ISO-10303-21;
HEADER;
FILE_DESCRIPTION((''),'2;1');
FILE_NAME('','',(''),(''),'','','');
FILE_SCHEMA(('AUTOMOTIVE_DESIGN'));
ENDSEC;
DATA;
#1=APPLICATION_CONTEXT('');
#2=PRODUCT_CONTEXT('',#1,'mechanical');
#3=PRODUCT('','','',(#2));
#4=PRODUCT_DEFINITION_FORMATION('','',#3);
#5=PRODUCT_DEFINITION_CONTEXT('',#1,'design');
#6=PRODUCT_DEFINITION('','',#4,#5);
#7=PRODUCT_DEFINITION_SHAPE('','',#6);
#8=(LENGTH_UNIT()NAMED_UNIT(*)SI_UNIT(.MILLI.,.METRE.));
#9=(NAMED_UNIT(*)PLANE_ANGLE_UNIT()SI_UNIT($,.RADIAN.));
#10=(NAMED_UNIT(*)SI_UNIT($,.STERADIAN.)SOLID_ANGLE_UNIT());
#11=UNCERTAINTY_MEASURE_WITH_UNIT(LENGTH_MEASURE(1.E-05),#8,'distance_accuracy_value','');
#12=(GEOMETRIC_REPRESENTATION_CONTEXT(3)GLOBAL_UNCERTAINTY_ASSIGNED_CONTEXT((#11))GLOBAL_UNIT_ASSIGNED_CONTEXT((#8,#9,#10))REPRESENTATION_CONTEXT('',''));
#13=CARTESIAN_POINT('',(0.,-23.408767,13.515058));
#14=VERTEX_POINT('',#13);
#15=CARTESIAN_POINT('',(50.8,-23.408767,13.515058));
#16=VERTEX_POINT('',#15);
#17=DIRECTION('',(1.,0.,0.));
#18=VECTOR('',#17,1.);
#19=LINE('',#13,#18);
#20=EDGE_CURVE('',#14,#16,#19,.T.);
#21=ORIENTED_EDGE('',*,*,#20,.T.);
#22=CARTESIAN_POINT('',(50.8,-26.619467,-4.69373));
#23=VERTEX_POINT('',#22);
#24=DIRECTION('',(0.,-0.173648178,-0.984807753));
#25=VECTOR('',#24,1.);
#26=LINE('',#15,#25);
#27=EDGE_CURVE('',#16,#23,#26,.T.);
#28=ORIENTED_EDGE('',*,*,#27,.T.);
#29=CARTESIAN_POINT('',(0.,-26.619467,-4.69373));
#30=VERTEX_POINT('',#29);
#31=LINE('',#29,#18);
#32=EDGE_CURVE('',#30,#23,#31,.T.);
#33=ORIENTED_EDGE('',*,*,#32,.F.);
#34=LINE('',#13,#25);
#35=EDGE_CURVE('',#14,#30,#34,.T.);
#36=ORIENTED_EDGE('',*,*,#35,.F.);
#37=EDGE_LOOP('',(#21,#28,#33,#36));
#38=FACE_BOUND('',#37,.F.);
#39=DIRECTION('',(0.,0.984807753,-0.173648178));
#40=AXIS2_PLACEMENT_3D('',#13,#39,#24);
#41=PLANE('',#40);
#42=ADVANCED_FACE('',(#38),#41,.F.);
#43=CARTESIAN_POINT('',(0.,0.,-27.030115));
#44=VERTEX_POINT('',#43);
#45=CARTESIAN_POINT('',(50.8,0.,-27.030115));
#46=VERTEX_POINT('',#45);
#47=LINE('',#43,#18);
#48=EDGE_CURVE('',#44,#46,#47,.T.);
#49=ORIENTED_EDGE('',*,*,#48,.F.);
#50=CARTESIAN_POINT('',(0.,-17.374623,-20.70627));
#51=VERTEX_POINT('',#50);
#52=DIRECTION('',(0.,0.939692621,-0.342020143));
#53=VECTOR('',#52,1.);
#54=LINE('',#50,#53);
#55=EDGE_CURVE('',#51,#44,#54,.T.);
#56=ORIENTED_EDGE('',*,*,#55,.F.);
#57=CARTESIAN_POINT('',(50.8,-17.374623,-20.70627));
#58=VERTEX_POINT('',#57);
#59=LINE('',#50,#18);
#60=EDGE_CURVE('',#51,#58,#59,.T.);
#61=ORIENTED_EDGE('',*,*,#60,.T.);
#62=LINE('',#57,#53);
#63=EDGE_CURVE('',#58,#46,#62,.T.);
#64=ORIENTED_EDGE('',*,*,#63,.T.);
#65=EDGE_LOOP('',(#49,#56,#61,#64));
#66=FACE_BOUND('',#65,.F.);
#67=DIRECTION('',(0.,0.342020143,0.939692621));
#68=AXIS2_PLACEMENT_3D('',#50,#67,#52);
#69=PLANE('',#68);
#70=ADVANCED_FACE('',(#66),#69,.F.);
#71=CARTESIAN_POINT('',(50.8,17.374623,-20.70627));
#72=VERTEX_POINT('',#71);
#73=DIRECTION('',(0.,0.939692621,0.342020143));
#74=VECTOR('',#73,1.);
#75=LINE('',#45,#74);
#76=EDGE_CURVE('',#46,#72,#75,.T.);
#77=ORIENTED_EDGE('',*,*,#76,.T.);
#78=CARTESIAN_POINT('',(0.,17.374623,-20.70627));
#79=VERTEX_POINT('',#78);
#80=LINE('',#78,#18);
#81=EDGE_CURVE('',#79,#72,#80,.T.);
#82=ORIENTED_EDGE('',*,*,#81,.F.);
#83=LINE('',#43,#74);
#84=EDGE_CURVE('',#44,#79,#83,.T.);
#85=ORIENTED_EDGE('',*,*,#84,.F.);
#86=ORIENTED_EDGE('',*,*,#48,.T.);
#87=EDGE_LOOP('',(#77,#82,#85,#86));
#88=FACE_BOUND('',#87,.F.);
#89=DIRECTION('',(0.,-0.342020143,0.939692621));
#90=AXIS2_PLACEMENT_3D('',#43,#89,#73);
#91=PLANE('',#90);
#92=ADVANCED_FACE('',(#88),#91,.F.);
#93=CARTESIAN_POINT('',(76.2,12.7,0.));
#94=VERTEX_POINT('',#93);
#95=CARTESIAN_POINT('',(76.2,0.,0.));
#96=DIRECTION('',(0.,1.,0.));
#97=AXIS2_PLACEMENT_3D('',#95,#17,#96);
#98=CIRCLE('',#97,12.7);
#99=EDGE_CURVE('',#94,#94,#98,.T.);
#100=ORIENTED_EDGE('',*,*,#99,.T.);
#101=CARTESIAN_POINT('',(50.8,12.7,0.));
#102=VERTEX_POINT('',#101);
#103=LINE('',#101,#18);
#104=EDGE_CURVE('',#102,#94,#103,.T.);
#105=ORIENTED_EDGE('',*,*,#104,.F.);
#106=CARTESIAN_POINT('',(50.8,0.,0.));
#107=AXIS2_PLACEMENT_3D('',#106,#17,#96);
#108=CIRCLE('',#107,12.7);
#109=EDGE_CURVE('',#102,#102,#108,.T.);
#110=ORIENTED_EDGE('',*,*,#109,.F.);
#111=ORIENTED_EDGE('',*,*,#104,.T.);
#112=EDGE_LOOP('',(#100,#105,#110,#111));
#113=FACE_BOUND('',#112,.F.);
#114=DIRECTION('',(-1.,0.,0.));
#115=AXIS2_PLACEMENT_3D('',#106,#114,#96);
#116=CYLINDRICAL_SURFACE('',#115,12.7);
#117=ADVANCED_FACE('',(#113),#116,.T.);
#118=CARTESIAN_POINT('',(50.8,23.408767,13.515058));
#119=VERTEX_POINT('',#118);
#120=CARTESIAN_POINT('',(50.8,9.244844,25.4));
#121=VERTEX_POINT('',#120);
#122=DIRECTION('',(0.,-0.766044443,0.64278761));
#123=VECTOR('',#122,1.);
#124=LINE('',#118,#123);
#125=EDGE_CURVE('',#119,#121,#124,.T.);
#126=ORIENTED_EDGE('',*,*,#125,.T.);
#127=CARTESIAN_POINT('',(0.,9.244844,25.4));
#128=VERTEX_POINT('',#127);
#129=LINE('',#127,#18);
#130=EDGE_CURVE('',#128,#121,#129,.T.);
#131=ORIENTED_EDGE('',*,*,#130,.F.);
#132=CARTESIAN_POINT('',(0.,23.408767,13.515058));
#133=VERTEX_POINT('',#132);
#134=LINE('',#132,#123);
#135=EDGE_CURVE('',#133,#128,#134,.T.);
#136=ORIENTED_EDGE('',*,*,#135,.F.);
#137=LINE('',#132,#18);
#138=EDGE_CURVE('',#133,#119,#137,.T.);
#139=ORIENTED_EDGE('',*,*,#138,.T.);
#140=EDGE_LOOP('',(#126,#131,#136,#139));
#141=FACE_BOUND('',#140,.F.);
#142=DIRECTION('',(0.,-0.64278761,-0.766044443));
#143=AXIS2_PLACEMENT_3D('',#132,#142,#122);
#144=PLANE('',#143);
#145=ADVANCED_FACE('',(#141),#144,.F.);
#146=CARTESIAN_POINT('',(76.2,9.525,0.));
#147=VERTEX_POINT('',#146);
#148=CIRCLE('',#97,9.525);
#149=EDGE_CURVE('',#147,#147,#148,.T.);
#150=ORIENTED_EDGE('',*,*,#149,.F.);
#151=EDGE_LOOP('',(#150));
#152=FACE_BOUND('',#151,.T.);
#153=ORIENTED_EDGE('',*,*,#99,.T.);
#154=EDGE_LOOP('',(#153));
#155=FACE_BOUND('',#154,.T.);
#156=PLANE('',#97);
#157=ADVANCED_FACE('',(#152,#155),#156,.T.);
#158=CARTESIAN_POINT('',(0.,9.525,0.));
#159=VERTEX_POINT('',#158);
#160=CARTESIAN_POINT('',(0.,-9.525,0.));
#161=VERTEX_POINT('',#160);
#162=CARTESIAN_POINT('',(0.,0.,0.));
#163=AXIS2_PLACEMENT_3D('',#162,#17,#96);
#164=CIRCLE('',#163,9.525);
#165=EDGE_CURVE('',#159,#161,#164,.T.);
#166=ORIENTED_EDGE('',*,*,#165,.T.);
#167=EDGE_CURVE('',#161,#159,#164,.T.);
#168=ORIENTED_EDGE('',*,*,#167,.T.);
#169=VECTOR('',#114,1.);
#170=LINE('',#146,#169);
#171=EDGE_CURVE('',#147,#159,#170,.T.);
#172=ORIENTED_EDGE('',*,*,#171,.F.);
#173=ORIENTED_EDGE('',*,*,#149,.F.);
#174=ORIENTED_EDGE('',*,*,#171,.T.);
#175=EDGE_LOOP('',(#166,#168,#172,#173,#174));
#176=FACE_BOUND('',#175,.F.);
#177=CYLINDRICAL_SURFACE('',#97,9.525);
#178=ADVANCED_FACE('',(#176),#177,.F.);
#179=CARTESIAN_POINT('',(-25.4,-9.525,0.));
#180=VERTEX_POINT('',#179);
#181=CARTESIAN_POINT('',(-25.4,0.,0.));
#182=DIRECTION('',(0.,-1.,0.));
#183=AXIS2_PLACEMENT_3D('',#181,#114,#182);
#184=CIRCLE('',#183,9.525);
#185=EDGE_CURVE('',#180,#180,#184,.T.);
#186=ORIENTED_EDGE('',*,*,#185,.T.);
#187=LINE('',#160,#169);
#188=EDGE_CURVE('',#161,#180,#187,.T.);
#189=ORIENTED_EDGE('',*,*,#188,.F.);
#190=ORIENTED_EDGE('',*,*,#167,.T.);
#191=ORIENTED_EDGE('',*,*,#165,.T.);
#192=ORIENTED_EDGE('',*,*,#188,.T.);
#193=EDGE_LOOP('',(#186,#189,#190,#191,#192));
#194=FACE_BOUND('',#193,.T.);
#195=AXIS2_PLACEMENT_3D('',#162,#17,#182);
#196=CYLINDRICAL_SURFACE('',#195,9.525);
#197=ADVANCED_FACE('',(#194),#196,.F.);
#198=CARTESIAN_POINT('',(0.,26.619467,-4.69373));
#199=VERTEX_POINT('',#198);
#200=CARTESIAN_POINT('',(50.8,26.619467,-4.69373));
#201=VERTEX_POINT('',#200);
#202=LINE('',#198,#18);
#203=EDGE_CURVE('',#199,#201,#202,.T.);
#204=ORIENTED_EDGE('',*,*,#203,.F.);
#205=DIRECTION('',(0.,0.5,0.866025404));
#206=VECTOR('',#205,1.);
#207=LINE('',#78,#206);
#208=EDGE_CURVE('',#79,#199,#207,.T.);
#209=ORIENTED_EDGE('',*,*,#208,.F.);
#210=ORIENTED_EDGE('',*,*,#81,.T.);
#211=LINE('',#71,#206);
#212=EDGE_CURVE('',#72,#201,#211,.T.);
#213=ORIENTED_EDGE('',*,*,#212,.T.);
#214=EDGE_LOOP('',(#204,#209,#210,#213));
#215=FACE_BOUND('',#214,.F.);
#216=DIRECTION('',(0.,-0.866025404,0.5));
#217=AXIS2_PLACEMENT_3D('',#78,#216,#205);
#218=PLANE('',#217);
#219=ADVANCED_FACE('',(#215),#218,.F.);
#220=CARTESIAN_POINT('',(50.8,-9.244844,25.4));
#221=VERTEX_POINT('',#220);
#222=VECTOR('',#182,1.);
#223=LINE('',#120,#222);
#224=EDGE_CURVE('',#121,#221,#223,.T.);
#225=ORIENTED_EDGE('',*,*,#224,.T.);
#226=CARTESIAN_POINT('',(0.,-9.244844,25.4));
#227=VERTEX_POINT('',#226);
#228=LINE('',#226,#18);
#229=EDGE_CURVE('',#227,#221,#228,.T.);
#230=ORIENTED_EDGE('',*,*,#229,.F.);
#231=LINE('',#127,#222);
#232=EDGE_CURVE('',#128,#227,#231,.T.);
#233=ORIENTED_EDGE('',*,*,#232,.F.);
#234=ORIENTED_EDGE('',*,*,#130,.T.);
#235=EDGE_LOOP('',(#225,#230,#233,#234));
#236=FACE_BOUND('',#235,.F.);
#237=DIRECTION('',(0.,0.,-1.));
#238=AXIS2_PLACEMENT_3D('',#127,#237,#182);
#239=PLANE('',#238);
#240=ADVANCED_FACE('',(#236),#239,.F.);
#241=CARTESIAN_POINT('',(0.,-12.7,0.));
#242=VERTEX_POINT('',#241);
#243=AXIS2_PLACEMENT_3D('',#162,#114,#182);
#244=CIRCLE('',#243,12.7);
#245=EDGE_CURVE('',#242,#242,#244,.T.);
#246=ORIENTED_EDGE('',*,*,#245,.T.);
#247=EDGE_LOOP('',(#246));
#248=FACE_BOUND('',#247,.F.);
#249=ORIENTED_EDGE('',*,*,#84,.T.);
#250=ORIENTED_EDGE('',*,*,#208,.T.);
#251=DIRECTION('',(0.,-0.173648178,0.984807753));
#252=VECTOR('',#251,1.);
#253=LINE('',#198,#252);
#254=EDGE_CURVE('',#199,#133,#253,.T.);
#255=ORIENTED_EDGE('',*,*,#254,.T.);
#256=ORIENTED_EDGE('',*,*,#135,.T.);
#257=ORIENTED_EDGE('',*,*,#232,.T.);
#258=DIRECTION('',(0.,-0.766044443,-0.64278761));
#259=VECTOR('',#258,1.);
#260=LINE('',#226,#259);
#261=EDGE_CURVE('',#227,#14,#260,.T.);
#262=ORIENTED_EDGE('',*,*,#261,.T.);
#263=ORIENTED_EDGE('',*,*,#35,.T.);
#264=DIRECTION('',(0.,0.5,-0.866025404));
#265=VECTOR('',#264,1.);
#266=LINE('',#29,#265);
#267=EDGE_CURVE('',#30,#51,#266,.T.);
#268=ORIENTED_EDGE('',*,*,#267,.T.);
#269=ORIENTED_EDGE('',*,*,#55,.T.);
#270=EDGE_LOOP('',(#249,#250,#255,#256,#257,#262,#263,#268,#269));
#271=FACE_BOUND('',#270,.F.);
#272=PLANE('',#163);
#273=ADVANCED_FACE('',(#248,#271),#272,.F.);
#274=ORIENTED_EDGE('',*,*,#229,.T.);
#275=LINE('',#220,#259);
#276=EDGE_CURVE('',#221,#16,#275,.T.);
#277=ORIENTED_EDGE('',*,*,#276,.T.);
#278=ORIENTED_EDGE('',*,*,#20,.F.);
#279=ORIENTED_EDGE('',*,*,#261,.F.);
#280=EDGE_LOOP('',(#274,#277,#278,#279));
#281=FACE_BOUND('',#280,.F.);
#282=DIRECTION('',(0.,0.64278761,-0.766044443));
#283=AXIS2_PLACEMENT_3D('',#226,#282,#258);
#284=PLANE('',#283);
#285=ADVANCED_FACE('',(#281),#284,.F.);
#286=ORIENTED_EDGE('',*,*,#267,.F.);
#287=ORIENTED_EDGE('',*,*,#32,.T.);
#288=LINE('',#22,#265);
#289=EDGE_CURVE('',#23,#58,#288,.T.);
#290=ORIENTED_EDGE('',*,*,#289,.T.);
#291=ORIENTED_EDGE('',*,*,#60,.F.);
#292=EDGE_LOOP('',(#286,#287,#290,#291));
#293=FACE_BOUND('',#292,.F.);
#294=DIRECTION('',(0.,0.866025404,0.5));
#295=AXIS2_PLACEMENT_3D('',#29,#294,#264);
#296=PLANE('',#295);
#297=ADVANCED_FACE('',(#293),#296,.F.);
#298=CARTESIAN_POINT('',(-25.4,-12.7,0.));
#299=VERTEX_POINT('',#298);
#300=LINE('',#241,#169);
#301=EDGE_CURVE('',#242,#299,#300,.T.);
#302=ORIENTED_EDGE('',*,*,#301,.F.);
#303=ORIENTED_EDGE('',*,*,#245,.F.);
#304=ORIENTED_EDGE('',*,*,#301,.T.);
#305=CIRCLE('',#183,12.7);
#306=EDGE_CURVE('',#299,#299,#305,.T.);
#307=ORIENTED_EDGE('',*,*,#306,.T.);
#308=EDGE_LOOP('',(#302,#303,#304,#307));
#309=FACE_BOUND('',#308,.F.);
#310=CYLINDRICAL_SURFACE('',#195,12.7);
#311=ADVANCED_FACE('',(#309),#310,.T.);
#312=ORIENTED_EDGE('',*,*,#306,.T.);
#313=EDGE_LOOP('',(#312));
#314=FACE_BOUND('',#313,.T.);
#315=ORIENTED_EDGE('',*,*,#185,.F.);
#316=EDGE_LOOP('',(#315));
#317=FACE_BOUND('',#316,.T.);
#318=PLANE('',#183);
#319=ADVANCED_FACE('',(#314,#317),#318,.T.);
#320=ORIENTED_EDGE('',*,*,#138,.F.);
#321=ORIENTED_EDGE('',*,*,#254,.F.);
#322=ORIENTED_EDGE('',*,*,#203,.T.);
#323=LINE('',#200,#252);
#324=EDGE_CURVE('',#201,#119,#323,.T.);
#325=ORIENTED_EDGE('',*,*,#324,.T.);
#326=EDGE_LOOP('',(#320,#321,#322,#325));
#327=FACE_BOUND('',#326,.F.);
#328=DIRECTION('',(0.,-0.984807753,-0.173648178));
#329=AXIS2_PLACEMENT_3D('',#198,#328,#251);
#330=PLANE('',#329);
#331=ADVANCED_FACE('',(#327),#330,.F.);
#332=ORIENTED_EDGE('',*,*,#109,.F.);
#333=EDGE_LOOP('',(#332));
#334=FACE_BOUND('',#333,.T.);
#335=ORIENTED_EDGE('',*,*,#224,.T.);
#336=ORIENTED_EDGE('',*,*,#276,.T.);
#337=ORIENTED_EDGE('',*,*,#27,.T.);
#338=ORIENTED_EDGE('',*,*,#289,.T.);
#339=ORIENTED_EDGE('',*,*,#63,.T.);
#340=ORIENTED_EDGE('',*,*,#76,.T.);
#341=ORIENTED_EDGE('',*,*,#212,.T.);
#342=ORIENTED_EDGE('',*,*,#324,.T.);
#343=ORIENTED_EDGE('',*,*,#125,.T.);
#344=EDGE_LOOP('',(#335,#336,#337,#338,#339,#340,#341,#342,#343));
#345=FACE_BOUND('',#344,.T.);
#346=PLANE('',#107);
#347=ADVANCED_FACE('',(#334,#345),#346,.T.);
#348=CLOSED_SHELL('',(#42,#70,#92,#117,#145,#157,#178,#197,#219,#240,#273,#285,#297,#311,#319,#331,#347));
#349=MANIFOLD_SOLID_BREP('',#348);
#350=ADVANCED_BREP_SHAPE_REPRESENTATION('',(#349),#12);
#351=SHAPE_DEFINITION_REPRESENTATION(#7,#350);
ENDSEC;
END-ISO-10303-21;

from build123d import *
from build123d import SkipClean  # not in build123d's __all__

# Parameters (mm, degrees)
F1_DEPTH = 50.8
F2_R     = 12.7
F3_DEPTH = 25.4
F4_R     = 9.525
F5_DEPTH = 76.2
F6_R     = 12.7
F6_R_2   = 9.525
F7_DEPTH = 25.4


with BuildPart() as f1:
    # F0 (on Right) → F1 (new body)
    with BuildSketch(Plane.YZ):
        Polygon((9.2448439504, 25.4), (-9.2448439504, 25.4), (-23.4087666217, 13.5150577104), (-26.6194672313, -4.693730285), (-17.3746232809, -20.706269715), (0, -27.0301154209), (17.3746232809, -20.706269715), (26.6194672313, -4.693730285), (23.4087666217, 13.5150577104), align=None)
    extrude(amount=F1_DEPTH)

    # F2 (on face) → F3 (join)
    with BuildSketch(Plane.YZ.offset(50.8)):
        Circle(F2_R)
    extrude(amount=F3_DEPTH)

    # F4 (on face) → F5 (cut)
    with BuildSketch(Plane.YZ.offset(76.2)):
        Circle(F4_R)
    extrude(amount=-F5_DEPTH, mode=Mode.SUBTRACT)

    # F6 (on face) → F7 (join)
    with BuildSketch(Plane(origin=(0, 0, 0), x_dir=(0, -1, 0), z_dir=(-1, 0, 0))):
        Circle(F6_R)
        Circle(F6_R_2, mode=Mode.SUBTRACT)
    with SkipClean():  # cleaning this boolean's faces spoils the solid; the shape is the same uncleaned
        extrude(amount=F7_DEPTH)


solid = f1.part
